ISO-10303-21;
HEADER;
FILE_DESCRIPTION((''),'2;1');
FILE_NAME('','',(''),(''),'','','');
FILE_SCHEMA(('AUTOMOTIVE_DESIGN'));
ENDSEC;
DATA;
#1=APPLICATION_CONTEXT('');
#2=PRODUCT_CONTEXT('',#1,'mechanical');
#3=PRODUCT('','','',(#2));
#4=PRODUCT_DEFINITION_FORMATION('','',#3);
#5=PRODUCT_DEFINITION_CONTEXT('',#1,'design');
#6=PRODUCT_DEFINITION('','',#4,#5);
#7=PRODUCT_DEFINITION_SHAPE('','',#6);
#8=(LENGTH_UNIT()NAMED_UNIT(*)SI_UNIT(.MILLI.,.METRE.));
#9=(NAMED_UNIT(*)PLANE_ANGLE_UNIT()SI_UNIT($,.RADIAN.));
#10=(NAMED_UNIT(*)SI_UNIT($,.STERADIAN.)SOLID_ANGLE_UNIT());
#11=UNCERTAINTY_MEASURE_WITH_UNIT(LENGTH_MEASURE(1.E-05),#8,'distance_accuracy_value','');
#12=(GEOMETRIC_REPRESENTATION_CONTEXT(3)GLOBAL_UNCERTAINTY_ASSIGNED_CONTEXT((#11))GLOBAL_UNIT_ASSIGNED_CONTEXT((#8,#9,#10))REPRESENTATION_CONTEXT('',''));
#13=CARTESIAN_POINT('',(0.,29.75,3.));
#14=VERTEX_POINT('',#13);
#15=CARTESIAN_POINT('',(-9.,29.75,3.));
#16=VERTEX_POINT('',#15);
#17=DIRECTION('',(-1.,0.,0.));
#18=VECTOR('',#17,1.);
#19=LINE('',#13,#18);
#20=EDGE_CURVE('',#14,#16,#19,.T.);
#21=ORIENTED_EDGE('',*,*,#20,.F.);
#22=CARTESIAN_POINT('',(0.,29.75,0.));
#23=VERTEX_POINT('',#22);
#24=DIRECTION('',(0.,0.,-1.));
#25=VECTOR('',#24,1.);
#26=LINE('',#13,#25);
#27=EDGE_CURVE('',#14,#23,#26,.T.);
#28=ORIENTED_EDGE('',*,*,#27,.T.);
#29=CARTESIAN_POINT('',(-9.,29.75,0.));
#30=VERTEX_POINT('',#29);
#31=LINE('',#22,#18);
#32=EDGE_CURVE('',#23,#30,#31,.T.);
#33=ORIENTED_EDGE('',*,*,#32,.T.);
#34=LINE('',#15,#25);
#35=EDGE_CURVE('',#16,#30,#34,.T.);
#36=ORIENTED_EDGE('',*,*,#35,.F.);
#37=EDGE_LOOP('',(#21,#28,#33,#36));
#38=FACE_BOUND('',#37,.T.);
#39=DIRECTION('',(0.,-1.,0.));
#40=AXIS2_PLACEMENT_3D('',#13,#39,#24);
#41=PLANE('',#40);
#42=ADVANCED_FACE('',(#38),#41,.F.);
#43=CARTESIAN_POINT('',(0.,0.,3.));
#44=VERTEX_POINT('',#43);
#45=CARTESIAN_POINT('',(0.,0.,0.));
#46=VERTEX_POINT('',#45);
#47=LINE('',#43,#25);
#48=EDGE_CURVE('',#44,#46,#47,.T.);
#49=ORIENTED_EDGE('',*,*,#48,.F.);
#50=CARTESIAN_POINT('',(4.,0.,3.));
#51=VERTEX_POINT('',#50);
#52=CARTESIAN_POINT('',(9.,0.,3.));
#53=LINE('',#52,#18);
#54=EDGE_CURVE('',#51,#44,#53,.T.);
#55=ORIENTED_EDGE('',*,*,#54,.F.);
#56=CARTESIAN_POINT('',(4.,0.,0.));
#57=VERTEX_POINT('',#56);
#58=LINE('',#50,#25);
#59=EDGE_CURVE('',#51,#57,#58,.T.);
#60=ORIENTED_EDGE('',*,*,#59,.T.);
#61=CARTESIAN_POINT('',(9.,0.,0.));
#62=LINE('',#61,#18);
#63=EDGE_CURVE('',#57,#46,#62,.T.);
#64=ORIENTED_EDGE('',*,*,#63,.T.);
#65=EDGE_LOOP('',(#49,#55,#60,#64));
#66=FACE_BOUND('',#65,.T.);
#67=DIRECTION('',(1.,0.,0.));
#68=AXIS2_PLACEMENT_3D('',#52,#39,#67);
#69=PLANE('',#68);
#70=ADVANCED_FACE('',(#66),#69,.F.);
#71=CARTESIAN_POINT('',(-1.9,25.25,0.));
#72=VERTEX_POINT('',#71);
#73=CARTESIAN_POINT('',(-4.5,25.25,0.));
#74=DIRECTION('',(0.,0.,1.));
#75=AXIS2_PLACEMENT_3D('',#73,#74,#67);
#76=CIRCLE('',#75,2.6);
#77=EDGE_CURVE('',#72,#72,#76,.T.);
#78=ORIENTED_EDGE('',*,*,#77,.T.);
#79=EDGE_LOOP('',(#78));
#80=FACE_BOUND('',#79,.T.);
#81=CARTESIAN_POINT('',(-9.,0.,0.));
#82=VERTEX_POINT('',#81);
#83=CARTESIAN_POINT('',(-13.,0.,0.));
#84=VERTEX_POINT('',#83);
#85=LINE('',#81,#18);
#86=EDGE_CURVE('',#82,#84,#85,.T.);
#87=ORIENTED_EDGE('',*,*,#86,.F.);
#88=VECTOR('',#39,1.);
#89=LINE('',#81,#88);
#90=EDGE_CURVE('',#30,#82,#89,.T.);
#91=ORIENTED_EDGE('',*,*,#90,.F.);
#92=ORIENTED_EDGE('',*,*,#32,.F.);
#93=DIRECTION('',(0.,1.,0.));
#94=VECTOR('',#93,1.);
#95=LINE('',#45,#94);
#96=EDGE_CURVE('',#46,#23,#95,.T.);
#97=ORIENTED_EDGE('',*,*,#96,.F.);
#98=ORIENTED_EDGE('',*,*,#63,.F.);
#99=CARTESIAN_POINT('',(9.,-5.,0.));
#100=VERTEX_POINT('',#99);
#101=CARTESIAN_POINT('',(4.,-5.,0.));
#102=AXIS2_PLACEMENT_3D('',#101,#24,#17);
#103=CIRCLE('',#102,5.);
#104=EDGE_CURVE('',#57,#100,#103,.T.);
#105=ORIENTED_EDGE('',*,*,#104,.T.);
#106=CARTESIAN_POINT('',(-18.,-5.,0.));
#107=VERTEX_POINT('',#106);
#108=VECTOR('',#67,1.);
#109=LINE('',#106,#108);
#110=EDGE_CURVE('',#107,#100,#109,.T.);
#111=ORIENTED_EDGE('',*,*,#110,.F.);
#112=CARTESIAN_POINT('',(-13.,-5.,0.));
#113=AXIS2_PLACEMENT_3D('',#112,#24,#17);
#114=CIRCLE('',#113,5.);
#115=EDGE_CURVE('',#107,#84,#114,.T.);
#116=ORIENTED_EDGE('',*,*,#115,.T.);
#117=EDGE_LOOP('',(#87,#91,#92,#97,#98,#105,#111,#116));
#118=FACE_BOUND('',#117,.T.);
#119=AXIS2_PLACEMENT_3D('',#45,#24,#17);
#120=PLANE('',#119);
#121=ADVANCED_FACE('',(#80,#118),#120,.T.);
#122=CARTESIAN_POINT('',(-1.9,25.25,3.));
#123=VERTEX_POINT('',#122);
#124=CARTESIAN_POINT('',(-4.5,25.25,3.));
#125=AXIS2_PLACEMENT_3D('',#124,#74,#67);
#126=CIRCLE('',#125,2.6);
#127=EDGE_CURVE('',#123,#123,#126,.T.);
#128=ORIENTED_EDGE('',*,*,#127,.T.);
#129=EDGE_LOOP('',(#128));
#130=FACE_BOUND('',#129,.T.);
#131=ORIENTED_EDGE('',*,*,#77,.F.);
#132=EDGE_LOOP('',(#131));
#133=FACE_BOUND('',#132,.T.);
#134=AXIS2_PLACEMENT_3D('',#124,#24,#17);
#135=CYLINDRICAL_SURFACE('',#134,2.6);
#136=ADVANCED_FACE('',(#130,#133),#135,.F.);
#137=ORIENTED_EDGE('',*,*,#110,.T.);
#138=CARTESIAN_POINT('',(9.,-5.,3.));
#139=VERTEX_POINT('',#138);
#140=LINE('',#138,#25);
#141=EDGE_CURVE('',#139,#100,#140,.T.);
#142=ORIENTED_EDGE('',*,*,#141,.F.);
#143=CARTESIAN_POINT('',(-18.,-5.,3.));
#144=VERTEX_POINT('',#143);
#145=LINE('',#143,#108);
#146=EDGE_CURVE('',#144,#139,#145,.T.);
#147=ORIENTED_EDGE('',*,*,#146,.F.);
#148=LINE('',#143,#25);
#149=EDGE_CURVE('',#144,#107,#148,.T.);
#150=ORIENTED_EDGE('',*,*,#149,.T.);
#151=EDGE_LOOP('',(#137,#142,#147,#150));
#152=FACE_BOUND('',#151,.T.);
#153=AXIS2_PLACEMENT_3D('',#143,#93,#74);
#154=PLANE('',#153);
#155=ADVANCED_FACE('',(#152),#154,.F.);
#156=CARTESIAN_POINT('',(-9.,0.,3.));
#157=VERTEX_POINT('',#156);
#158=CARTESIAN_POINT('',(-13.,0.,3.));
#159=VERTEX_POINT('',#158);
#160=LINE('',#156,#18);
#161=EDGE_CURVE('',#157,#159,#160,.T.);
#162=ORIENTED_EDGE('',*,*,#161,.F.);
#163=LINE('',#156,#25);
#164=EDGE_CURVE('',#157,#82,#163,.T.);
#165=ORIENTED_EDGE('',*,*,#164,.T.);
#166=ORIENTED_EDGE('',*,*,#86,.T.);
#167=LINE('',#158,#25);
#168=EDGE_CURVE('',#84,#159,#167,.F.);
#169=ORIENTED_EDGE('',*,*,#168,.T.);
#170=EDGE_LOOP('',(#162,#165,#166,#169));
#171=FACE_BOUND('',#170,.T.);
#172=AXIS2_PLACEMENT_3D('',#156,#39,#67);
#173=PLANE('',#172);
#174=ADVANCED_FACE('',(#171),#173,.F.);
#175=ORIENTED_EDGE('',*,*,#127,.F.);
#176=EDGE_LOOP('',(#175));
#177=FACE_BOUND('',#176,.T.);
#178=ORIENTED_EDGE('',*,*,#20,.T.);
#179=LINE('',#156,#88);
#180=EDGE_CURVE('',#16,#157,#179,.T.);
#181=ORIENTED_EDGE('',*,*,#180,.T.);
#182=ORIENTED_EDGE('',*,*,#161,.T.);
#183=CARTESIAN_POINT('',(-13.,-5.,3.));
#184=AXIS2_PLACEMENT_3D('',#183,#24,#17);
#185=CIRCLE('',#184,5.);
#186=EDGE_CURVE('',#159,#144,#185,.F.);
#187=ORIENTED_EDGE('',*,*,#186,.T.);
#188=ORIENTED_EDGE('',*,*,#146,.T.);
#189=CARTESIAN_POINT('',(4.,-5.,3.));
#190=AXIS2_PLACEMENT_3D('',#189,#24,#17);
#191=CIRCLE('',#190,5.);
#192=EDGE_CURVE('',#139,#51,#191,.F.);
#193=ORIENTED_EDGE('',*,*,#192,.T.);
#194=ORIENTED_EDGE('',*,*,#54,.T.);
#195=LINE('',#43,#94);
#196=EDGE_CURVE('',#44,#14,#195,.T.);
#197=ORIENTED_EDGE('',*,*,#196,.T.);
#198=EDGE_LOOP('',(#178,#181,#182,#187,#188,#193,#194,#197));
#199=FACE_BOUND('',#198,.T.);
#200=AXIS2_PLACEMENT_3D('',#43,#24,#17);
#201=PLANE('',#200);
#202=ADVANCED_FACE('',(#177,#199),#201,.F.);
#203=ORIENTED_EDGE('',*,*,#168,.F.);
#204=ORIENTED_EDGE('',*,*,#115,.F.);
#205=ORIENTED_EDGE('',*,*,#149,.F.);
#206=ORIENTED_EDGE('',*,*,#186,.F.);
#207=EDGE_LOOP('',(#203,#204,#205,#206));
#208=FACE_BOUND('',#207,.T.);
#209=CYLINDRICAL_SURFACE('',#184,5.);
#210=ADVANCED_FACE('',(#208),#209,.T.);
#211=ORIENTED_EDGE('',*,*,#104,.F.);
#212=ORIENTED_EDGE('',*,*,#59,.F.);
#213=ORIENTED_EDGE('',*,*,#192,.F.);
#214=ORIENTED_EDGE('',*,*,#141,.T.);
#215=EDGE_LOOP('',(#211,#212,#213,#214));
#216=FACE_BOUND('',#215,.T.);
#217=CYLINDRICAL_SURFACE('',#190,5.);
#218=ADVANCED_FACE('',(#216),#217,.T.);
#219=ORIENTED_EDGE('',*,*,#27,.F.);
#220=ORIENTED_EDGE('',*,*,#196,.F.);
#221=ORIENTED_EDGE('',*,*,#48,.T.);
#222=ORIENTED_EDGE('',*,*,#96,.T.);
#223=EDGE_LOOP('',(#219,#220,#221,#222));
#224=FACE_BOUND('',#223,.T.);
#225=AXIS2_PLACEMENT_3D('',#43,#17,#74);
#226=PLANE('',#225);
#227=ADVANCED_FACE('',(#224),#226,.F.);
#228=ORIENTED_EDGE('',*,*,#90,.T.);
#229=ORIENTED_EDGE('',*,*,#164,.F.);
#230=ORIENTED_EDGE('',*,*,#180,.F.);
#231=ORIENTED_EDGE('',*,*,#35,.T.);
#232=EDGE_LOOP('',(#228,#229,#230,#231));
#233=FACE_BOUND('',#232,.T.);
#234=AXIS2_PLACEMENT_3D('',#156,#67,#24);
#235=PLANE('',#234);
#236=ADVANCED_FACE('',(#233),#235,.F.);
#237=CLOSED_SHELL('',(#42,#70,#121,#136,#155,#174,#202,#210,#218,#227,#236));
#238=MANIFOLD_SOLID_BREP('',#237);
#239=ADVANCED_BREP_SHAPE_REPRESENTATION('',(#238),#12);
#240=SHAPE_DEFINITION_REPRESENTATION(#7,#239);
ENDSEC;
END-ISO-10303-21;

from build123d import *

# Parameters (mm, degrees)
ESQUISSE1_R        = 2.6
BOSS_EXTRU_1_DEPTH = 3
CONG_1_R           = 5
CONG_2_R           = 5


with BuildPart() as part:
    # Esquisse1 → Boss.-Extru.1 (new body)
    with BuildSketch(Plane.XY):
        Polygon((-9, 0), (-18, 0), (-18, -5), (9, -5), (9, 0), (0, 0), (0, 29.75), (-9, 29.75), align=None)
        with Locations((-4.5, 25.25)):
            Circle(ESQUISSE1_R, mode=Mode.SUBTRACT)
    extrude(amount=BOSS_EXTRU_1_DEPTH)

    # Congé1
    cong_1_edges = [part.edges().sort_by_distance(p)[0] for p in [
        (-18, 0, 1.5),
    ]]
    fillet(cong_1_edges, radius=CONG_1_R - 0.0001)  # a hair under: the kernel refuses the full size

    # Congé2
    cong_2_edges = [part.edges().sort_by_distance(p)[0] for p in [
        (9, 0, 1.5),
    ]]
    fillet(cong_2_edges, radius=CONG_2_R - 0.0001)  # a hair under: the kernel refuses the full size


solid = part.part
